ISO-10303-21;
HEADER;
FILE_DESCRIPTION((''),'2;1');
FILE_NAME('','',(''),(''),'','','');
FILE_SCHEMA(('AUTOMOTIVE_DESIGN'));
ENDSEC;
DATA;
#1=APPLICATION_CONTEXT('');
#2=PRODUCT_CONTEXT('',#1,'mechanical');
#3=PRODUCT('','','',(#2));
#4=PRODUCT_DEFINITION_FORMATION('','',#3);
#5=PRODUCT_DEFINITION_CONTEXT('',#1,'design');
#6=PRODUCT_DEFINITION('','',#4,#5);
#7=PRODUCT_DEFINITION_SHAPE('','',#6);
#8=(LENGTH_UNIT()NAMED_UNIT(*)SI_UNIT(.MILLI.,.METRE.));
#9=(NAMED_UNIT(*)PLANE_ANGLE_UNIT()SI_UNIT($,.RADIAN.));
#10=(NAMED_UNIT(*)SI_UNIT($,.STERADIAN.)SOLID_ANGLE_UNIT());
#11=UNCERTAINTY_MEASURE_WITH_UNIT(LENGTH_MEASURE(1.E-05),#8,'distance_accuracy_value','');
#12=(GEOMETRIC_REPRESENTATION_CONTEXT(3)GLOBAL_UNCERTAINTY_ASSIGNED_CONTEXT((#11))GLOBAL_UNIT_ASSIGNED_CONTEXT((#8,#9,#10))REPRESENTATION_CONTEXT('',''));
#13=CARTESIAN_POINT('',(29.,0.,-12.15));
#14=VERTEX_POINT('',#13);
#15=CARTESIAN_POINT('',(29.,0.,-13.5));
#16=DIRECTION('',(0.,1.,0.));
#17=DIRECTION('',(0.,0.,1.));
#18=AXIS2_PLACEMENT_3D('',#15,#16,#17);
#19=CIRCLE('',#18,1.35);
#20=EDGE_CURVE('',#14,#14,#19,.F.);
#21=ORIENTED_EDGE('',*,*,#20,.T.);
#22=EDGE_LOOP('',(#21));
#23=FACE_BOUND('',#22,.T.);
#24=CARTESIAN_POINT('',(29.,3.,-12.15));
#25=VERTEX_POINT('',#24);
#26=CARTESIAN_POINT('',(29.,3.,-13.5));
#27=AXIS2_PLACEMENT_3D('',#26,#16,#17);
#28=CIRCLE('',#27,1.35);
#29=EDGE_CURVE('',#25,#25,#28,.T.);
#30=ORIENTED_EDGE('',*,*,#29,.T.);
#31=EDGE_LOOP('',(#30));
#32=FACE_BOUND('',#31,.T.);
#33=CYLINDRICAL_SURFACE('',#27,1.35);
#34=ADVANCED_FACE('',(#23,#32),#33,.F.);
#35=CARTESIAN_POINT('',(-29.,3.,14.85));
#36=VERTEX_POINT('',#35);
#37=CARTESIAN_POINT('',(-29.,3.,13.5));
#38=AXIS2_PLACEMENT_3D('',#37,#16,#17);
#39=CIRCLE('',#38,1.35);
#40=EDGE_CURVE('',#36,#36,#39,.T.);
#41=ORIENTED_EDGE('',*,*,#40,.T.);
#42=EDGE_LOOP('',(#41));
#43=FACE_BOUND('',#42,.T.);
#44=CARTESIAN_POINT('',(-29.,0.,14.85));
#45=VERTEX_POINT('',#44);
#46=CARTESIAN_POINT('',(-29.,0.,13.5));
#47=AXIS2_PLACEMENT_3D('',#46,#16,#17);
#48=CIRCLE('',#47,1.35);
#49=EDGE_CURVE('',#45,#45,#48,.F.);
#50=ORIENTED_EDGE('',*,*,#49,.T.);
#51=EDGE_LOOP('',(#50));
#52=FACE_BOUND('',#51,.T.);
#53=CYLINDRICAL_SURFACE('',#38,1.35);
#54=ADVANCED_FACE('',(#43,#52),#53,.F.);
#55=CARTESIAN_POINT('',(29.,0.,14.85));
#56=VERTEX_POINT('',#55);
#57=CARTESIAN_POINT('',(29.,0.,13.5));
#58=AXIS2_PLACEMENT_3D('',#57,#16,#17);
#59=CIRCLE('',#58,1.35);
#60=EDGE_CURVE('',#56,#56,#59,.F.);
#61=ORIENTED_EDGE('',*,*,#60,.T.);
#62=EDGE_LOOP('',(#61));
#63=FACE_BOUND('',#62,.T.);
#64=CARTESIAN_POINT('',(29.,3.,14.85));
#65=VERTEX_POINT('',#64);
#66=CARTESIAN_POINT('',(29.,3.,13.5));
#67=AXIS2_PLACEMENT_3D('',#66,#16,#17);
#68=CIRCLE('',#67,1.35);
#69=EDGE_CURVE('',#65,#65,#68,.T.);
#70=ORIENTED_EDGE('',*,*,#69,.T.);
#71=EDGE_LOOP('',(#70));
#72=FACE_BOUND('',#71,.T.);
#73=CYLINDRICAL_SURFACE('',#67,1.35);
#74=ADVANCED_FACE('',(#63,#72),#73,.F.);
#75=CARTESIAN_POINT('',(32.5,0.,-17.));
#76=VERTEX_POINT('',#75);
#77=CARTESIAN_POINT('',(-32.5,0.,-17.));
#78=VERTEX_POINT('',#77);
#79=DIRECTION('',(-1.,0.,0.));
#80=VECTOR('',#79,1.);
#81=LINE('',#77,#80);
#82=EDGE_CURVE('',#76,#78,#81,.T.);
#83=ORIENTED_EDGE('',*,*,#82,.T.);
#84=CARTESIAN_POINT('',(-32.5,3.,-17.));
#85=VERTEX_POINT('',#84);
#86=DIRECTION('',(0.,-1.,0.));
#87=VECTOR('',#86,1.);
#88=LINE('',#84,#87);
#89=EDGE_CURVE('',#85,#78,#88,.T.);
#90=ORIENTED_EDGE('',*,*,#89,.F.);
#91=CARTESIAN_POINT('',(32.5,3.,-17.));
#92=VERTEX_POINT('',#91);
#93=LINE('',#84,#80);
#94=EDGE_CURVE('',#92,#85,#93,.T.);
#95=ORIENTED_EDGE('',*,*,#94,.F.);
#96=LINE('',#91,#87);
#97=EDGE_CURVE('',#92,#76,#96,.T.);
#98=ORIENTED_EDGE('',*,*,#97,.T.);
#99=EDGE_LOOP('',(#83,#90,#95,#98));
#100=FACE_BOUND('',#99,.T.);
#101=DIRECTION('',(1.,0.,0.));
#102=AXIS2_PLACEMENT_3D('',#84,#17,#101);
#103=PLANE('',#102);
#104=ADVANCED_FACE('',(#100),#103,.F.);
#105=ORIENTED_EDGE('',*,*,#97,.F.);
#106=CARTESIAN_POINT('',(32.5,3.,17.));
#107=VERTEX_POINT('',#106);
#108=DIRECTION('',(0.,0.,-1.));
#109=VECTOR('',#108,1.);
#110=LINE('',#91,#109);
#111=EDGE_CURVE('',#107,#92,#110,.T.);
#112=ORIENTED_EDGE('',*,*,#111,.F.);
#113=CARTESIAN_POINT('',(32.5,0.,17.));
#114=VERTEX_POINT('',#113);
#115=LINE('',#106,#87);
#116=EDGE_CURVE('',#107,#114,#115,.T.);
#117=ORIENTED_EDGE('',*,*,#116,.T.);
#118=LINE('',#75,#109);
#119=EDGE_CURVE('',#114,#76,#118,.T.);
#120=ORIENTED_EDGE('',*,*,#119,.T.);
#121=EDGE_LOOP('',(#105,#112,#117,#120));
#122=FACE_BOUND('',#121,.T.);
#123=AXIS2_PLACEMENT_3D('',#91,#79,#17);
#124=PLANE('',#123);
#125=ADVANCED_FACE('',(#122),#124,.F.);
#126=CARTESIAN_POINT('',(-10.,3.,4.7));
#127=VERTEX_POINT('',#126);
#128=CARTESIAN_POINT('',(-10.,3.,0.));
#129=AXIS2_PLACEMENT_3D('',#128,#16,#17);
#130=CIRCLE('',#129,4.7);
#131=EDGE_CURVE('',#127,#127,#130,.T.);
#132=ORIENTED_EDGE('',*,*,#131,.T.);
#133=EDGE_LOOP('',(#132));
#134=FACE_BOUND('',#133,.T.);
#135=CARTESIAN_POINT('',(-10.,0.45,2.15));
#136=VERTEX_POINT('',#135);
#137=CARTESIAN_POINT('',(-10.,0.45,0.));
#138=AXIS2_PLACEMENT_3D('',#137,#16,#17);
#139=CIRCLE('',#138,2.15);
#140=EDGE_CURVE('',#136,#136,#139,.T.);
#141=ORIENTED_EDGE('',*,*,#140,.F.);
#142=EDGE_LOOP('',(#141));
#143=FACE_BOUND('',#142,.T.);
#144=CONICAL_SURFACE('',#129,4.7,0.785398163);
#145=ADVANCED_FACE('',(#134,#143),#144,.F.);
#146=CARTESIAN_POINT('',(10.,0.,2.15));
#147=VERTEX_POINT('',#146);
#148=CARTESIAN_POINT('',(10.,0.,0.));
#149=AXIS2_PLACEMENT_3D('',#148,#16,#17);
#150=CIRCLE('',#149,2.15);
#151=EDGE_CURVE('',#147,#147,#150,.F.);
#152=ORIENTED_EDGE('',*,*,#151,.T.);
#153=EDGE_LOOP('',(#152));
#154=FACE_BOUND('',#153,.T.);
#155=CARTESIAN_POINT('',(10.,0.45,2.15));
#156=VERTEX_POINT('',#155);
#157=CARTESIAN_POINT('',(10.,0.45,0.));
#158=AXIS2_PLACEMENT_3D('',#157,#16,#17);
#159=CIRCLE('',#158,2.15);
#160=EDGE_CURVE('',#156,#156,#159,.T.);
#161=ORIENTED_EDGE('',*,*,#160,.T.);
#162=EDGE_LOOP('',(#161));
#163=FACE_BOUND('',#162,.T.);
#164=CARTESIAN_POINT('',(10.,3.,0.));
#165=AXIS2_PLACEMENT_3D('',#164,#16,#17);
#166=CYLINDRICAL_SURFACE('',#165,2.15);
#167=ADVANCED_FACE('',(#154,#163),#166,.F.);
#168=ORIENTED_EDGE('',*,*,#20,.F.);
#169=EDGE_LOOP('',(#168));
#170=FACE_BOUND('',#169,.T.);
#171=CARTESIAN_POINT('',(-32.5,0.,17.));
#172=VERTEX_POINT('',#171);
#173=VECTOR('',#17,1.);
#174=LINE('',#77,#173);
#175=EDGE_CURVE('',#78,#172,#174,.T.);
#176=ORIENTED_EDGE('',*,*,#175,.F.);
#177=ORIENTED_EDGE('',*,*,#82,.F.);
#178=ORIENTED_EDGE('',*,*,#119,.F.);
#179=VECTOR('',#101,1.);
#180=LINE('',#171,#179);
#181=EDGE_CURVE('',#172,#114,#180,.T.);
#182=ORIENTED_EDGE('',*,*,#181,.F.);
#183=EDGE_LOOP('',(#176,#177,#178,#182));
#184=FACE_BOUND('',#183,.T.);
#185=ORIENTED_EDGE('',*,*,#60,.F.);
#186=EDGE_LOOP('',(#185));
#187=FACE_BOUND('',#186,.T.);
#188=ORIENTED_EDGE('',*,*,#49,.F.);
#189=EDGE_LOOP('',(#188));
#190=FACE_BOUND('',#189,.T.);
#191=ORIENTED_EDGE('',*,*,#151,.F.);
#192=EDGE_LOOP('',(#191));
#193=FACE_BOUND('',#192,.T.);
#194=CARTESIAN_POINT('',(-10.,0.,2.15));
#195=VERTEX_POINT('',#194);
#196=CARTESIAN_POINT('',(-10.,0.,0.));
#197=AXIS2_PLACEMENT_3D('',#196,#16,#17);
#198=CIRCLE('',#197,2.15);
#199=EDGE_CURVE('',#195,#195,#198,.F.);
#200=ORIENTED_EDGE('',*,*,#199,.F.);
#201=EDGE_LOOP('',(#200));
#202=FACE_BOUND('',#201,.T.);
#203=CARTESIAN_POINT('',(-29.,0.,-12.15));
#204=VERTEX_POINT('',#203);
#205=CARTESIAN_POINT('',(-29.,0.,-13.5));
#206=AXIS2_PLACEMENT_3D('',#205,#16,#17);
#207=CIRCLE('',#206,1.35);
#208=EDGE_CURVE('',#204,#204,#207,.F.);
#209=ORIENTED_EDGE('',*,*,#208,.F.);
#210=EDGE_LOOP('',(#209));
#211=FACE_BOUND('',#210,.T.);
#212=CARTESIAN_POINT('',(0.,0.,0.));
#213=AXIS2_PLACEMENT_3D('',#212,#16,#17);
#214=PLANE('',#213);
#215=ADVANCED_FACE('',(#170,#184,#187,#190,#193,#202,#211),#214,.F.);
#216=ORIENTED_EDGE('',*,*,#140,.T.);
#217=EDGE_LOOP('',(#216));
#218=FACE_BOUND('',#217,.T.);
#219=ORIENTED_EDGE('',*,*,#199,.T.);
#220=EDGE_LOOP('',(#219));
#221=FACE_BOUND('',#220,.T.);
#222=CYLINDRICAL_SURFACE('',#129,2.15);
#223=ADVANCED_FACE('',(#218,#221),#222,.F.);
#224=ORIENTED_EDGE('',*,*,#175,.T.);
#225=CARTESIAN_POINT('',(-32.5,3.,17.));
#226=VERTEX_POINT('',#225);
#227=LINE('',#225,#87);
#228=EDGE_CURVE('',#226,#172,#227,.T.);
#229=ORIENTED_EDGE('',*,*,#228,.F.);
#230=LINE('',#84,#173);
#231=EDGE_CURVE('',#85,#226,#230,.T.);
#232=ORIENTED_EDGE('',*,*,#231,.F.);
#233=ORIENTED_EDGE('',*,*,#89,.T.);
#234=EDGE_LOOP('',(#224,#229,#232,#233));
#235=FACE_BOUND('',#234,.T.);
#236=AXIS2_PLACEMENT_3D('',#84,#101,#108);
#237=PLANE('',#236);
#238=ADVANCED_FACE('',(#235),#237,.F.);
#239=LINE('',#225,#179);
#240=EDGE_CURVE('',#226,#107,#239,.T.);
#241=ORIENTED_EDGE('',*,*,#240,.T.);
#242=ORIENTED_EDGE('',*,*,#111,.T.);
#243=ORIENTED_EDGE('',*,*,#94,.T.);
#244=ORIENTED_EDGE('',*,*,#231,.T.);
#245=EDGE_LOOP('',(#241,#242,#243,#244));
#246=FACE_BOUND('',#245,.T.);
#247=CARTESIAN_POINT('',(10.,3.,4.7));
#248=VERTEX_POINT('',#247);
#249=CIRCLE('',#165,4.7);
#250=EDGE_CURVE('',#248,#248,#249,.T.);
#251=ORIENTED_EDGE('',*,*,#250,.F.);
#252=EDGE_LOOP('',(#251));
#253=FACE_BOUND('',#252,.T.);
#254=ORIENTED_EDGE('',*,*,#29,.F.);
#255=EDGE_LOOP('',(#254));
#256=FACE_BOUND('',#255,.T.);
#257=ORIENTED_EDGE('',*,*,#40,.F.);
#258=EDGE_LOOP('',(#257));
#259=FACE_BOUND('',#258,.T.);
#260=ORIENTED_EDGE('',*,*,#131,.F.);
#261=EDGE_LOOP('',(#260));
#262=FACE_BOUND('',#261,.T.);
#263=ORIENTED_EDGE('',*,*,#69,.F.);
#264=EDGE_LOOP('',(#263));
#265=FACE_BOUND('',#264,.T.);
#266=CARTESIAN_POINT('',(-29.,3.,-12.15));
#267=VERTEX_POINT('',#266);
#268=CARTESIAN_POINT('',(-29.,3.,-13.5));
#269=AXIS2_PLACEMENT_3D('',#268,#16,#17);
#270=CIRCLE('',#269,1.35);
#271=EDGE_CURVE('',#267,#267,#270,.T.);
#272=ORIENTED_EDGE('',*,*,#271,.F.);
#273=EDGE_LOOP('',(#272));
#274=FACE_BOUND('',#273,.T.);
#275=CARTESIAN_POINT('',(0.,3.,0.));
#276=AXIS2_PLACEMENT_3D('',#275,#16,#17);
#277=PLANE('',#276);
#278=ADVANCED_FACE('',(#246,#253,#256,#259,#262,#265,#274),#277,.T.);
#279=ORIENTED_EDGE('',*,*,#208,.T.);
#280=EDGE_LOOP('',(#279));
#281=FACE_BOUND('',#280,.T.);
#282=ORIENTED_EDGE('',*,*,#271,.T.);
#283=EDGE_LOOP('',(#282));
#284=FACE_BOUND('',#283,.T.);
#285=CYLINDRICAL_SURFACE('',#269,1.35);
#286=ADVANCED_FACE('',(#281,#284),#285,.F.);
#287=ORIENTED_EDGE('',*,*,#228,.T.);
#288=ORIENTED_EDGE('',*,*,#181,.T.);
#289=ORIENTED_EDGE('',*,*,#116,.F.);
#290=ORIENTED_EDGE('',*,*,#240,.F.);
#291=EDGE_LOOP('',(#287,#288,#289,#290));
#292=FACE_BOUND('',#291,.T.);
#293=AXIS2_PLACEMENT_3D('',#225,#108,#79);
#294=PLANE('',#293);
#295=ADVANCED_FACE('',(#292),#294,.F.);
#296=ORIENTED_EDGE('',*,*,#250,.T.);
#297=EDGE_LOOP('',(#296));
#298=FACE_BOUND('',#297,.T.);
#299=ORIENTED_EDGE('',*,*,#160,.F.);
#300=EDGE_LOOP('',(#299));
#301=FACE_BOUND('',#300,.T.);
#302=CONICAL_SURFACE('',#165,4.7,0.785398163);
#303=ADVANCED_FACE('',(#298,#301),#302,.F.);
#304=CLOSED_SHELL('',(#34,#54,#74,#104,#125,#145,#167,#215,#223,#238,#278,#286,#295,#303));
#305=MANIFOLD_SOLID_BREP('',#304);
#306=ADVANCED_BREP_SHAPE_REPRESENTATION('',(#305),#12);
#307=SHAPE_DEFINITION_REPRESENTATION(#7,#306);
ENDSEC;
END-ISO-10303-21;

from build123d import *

# Parameters (mm, degrees)
SKETCH1_W              = 65
SKETCH1_H              = 34
SKETCH1_R              = 0.5
BOSS_EXTRUDE1_DEPTH    = 3
M2_5_CLEARANCE_HOLE1_D = 2.7


# Read off the part's stored shape, not the designer's step: CSK for M4 Flat Head Machine Screw1
with BuildPart() as part:
    # Sketch1 → Boss-Extrude1 (new body)
    with BuildSketch(Plane(origin=(0, 0, 0), x_dir=(1, 0, 0), z_dir=(0, 1, 0))):
        Rectangle(SKETCH1_W, SKETCH1_H)
        with Locations(Location((-29, -13.5, 0), (0, 0, 270))):
            Circle(SKETCH1_R, mode=Mode.SUBTRACT)
        with Locations(Location((-29, 13.5, 0), (0, 0, 270))):
            Circle(SKETCH1_R, mode=Mode.SUBTRACT)
        with Locations(Location((29, -13.5, 0), (0, 0, 270))):
            Circle(SKETCH1_R, mode=Mode.SUBTRACT)
        with Locations(Location((29, 13.5, 0), (0, 0, 270))):
            Circle(SKETCH1_R, mode=Mode.SUBTRACT)
        with Locations(Location((-10, 0, 0), (0, 0, 270))):
            Circle(SKETCH1_R, mode=Mode.SUBTRACT)
        with Locations(Location((10, 0, 0), (0, 0, 270))):
            Circle(SKETCH1_R, mode=Mode.SUBTRACT)
    extrude(amount=BOSS_EXTRUDE1_DEPTH)

    # M2.5 Clearance Hole1 (through all)
    with Locations(Plane(origin=(0, 3, 0), x_dir=(1, 0, 0), z_dir=(0, 1, 0))):
        with Locations((-29, -13.5), (-29, 13.5), (29, 13.5), (29, -13.5)):
            Hole(M2_5_CLEARANCE_HOLE1_D / 2)

    # CSK for M4 Flat Head Machine Screw1 outl → CSK for M4 Flat Head Machine Screw1 (revolve, cut)
    with BuildSketch(Plane(origin=(10, 0, 0), x_dir=(1, 0, 0), z_dir=(0, 0, 1))):
        Polygon((0.5, 0), (2.15, 0), (2.15, 0.45), (4.7, 3), (0.5, 3), align=None)
    revolve(axis=Axis((10, 0, 0), (0, 1, 0)), mode=Mode.SUBTRACT)

    # CSK for M4 Flat Head Machine Screw1 2 ou → CSK for M4 Flat Head Machine Screw1 2 (revolve, cut)
    with BuildSketch(Plane(origin=(-10, 0, 0), x_dir=(1, 0, 0), z_dir=(0, 0, 1))):
        Polygon((0.5, 0), (2.15, 0), (2.15, 0.45), (4.7, 3), (0.5, 3), align=None)
    revolve(axis=Axis((-10, 0, 0), (0, 1, 0)), mode=Mode.SUBTRACT)


solid = part.part
